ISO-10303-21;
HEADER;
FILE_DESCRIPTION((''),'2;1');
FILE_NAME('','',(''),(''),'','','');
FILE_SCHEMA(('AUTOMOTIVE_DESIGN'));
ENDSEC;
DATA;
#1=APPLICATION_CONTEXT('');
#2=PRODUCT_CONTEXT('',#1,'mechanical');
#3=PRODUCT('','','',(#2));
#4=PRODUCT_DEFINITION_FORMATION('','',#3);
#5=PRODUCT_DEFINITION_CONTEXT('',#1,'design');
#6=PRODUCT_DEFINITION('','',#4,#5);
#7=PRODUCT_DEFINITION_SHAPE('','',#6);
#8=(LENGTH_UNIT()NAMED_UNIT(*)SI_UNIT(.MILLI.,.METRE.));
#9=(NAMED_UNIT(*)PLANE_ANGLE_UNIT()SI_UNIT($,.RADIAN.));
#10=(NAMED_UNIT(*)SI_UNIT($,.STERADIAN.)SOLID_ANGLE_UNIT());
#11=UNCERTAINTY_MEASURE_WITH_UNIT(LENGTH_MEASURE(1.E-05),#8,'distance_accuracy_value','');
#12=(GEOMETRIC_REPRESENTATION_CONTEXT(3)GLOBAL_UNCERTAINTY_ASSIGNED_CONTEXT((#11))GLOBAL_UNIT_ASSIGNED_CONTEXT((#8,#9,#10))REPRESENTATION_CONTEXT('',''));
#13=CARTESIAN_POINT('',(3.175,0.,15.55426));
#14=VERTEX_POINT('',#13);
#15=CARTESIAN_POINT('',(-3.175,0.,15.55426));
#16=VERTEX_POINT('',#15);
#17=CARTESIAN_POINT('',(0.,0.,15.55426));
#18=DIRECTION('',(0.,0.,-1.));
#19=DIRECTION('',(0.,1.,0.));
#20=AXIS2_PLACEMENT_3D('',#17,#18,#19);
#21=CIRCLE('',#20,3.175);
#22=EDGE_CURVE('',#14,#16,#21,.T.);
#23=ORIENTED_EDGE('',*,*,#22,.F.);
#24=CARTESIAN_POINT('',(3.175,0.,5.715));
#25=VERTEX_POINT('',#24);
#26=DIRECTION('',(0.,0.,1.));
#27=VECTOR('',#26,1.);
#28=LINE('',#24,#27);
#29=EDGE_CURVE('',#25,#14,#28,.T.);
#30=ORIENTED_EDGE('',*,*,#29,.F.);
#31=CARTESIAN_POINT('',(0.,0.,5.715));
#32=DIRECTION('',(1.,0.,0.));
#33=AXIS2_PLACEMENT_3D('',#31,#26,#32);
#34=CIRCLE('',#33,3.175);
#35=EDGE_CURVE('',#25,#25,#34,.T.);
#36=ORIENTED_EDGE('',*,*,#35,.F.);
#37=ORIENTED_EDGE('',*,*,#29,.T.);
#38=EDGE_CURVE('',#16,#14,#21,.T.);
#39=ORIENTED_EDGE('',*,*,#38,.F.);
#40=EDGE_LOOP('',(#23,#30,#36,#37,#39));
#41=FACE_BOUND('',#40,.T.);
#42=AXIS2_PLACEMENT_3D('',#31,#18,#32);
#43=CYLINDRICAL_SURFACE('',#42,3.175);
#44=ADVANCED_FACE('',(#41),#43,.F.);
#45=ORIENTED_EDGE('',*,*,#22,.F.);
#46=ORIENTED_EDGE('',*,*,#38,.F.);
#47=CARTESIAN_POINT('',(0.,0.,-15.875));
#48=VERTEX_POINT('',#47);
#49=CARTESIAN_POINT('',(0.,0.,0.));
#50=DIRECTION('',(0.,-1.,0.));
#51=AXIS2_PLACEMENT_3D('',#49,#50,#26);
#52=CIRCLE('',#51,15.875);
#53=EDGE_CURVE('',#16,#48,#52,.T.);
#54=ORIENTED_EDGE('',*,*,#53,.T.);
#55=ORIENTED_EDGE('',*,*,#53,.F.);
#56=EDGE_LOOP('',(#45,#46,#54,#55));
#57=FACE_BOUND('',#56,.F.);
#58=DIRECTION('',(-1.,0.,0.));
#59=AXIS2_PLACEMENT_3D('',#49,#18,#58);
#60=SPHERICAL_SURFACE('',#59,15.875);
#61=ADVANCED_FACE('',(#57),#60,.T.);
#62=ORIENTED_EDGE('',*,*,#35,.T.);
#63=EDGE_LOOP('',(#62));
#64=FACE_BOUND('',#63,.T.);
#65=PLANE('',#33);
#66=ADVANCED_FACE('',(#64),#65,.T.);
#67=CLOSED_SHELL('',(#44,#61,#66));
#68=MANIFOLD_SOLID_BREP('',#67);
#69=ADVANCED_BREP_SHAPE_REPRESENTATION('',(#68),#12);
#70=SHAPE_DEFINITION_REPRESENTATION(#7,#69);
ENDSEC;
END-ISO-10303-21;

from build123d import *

# Parameters (mm, degrees)
F5_R     = 3.175
F6_DEPTH = 50.8


# Not quite as in the source:
# - a length typed as a fraction of an inch, garbled in the dataset ("3 / 203.2 mm" for 3/8 in), is restored


with BuildPart() as f2:
    # F0 (on Front) → F2 (revolve)
    with BuildSketch(Plane.XZ):
        with BuildLine():
            Line((0, -15.875), (0, 15.875))
            ThreePointArc((0, 15.875), (-15.875, 0), (0, -15.875))
        make_face()
    revolve(axis=Axis((0, 0, 0), (0, 0, 1)))


with BuildPart() as f6:
    # F5 (on offset) → F6 (new body)
    with BuildSketch(Plane.XY.offset(5.715)):
        Circle(F5_R)
    extrude(amount=F6_DEPTH)


with BuildPart() as f2_1:
    add(f2.part)

    # F7: cut F6
    add(f6.part, mode=Mode.SUBTRACT)


solid = f2_1.part
